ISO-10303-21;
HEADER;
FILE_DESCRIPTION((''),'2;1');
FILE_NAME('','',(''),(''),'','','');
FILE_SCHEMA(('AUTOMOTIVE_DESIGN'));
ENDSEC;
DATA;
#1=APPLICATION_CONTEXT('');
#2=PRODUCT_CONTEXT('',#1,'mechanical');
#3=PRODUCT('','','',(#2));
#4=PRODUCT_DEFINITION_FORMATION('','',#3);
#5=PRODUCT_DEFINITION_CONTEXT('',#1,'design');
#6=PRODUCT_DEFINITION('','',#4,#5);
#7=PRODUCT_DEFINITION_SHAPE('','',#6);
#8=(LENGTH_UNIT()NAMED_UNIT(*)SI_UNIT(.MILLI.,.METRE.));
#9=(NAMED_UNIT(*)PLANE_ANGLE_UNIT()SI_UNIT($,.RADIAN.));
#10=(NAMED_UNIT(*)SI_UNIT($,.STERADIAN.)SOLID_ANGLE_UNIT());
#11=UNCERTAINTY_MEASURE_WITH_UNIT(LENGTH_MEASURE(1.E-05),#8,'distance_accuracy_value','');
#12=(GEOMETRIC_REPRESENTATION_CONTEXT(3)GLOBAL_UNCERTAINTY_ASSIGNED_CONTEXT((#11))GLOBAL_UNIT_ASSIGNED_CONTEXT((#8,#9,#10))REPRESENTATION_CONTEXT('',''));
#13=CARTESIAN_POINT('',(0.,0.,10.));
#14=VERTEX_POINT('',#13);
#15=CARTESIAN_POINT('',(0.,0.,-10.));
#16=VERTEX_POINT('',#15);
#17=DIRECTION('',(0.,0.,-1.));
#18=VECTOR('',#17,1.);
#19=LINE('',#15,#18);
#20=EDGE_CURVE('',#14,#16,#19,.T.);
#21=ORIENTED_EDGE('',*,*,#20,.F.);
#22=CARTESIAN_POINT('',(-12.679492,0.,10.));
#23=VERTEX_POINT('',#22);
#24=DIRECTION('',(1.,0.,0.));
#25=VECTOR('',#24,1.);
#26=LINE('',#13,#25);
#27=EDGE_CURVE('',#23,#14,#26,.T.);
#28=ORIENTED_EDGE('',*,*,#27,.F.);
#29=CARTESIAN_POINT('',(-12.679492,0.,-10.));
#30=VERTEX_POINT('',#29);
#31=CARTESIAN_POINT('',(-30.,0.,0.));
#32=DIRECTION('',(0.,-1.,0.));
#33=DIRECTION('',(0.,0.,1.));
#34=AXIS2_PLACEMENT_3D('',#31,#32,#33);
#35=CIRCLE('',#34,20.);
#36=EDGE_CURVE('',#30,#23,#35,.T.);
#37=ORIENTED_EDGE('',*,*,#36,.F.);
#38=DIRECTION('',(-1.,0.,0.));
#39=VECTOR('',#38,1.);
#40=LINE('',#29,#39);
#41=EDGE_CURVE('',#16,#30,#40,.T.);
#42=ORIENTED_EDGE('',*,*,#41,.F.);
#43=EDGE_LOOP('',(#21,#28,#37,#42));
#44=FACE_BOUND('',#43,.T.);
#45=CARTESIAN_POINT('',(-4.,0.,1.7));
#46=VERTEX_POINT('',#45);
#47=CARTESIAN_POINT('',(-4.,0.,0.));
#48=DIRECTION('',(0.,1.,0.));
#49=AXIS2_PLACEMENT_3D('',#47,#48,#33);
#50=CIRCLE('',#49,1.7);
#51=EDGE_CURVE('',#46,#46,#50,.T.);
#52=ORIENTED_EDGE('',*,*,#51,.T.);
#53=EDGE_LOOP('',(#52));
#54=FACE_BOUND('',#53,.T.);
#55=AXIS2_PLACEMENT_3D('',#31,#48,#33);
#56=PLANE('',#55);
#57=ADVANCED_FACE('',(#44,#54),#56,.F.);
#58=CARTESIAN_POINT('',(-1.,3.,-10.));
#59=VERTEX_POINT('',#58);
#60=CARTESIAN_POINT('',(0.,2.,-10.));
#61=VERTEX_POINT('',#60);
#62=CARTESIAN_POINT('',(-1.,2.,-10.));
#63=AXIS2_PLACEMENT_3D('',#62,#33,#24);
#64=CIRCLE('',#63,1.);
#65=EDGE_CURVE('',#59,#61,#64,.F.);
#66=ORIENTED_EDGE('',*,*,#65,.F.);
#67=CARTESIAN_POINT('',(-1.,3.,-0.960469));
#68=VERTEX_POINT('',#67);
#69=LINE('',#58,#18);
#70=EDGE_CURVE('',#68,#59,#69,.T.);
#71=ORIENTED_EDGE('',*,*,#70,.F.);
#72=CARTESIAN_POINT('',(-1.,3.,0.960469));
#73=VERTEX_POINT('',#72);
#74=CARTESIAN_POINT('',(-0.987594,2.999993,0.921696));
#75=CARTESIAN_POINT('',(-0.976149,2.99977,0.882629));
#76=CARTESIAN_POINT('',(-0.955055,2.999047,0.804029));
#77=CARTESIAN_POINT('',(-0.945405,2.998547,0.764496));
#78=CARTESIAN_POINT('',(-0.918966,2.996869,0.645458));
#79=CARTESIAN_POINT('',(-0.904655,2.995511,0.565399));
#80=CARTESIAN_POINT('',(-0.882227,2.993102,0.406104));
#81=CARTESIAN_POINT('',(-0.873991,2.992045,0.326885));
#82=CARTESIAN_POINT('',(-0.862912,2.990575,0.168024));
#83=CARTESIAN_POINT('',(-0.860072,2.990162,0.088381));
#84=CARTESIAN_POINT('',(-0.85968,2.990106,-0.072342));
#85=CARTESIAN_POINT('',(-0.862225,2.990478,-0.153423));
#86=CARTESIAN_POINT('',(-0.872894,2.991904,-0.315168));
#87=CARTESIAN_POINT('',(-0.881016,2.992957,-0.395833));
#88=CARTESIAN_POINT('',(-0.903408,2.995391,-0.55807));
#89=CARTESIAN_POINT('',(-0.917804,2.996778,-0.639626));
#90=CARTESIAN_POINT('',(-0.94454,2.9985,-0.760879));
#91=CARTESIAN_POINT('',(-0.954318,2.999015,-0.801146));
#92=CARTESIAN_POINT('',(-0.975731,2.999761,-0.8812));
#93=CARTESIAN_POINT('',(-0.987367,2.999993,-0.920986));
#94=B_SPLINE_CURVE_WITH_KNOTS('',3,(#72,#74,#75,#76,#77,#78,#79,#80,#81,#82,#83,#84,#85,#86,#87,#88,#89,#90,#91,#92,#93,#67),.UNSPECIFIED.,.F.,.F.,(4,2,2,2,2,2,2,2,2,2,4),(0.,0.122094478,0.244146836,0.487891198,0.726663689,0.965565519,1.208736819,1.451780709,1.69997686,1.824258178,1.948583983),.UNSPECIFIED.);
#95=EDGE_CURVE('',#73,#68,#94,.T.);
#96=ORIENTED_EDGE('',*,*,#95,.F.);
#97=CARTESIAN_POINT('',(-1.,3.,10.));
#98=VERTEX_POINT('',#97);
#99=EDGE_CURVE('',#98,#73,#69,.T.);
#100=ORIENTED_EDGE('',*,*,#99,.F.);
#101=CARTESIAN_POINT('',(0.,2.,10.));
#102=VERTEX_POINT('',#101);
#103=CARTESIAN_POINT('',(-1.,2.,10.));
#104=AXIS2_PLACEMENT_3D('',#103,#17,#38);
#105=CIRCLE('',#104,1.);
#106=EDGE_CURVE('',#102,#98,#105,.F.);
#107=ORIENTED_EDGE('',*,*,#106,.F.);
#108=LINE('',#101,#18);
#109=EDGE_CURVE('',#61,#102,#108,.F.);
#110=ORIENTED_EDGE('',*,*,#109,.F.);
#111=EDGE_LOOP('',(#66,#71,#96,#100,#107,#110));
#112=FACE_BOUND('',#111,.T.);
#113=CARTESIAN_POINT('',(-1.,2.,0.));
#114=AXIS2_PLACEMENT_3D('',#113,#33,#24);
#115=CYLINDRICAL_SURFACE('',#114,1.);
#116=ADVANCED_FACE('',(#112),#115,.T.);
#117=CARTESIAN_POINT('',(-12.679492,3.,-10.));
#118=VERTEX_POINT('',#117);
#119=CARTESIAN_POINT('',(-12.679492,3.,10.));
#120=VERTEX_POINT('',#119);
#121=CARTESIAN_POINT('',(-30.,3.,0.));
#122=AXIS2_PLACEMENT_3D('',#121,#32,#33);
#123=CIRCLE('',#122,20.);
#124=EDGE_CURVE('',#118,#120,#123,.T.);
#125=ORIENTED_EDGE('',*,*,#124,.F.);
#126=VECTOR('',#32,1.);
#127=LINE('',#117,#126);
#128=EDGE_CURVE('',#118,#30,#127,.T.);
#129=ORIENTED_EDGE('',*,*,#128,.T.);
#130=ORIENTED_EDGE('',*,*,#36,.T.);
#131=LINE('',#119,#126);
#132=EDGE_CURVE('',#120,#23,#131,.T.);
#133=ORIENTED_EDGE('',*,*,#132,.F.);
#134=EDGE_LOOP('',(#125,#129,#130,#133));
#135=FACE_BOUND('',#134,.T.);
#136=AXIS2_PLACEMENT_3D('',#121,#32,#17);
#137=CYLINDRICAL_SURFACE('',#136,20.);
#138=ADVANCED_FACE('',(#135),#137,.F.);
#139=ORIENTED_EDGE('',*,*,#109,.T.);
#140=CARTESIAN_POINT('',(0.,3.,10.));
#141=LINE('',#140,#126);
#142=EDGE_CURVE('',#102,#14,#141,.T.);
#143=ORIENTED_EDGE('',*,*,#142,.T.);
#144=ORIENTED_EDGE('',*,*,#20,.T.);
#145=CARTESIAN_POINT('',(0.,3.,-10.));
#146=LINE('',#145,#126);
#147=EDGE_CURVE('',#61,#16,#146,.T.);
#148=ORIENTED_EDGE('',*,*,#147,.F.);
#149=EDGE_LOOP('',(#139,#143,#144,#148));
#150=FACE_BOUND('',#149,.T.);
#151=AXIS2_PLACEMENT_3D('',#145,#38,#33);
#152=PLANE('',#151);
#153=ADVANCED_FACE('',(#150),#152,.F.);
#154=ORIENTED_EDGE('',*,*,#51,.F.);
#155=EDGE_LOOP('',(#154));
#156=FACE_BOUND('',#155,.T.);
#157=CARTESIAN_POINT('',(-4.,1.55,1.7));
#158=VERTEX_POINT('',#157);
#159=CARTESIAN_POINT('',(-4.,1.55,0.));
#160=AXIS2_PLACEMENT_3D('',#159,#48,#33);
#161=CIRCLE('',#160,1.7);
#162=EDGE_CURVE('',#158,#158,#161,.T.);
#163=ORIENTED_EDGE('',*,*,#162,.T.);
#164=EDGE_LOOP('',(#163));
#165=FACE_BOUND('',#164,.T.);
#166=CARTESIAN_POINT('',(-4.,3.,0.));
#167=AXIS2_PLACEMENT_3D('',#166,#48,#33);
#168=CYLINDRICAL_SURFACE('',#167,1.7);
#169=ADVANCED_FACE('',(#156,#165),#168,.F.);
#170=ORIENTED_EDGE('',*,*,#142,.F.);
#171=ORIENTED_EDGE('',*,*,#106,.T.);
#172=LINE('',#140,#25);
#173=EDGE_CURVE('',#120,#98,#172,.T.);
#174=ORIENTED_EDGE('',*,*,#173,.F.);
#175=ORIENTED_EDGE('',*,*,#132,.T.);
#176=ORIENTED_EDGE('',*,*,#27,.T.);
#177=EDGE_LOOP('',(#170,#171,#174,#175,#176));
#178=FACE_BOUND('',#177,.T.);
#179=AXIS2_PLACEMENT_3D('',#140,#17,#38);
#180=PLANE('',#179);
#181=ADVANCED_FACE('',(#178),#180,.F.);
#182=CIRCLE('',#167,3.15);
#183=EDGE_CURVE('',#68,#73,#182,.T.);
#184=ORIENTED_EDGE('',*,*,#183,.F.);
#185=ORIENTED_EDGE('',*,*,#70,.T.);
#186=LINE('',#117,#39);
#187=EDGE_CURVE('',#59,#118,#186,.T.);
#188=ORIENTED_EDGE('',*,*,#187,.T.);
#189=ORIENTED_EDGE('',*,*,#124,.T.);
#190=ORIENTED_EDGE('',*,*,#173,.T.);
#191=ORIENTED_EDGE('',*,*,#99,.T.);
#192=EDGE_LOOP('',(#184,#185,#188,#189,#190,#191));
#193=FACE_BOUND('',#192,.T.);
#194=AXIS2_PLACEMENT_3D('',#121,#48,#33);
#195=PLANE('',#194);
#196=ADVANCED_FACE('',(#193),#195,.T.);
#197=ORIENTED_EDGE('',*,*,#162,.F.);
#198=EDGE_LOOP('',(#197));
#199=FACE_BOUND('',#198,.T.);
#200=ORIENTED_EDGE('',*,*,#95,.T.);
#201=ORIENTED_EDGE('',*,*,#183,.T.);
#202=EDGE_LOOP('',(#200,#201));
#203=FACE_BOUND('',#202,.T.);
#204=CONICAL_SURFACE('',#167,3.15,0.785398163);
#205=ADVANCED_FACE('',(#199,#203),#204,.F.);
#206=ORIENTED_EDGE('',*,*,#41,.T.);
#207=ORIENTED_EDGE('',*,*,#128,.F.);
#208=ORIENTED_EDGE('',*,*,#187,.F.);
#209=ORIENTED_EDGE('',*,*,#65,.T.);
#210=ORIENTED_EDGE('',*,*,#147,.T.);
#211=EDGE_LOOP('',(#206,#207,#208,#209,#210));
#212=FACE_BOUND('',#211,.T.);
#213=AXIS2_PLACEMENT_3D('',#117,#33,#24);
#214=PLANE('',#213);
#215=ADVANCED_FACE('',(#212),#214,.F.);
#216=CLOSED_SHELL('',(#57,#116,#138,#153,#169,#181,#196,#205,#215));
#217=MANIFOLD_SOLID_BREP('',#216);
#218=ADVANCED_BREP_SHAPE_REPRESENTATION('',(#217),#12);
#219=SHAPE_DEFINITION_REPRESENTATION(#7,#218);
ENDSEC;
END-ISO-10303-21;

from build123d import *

# Parameters (mm, degrees)
BOSS_EXTRU_1_DEPTH = 3
CONG_1_R           = 1


with BuildPart() as part:
    # Esquisse1 → Boss.-Extru.1 (new body)
    with BuildSketch(Plane(origin=(0, 0, 0), x_dir=(1, 0, 0), z_dir=(0, 1, 0))):
        with BuildLine():
            Line((0, 10), (0, -10))
            Line((0, -10), (-12.679491924, -10))
            ThreePointArc((-12.679491924, -10), (-10, 0), (-12.679491924, 10))
            Line((-12.679491924, 10), (0, 10))
        make_face()
    extrude(amount=BOSS_EXTRU_1_DEPTH)

    # Esquisse3 → Fraisage pour vis à tête fraisée M31 (revolve, cut)
    with BuildSketch(Plane(origin=(-4, 3, 0), x_dir=(0, 0, 1), z_dir=(1, 0, 0))):
        Polygon((0, 0), (0, 3), (1.7, 3), (1.7, 1.45), (3.15, 0), align=None)
    revolve(axis=Axis((-4, 9.35, 0), (0, -1, 0)), mode=Mode.SUBTRACT)

    # Congé1
    # the kernel refuses this fillet: 1 mm, written as the material it takes off along each edge
    with BuildSketch(Plane(origin=(0, 3, -12.5), x_dir=(0, -1, 0), z_dir=(0, 0, 1))) as cong_1_piece_1:
        with BuildLine():
            CenterArc((CONG_1_R, -CONG_1_R), CONG_1_R, 90, 90)
            Line((0, -CONG_1_R), (0, 0))
            Line((0, 0), (CONG_1_R, 0))
        make_face()
    extrude(amount=25, mode=Mode.SUBTRACT)


solid = part.part
